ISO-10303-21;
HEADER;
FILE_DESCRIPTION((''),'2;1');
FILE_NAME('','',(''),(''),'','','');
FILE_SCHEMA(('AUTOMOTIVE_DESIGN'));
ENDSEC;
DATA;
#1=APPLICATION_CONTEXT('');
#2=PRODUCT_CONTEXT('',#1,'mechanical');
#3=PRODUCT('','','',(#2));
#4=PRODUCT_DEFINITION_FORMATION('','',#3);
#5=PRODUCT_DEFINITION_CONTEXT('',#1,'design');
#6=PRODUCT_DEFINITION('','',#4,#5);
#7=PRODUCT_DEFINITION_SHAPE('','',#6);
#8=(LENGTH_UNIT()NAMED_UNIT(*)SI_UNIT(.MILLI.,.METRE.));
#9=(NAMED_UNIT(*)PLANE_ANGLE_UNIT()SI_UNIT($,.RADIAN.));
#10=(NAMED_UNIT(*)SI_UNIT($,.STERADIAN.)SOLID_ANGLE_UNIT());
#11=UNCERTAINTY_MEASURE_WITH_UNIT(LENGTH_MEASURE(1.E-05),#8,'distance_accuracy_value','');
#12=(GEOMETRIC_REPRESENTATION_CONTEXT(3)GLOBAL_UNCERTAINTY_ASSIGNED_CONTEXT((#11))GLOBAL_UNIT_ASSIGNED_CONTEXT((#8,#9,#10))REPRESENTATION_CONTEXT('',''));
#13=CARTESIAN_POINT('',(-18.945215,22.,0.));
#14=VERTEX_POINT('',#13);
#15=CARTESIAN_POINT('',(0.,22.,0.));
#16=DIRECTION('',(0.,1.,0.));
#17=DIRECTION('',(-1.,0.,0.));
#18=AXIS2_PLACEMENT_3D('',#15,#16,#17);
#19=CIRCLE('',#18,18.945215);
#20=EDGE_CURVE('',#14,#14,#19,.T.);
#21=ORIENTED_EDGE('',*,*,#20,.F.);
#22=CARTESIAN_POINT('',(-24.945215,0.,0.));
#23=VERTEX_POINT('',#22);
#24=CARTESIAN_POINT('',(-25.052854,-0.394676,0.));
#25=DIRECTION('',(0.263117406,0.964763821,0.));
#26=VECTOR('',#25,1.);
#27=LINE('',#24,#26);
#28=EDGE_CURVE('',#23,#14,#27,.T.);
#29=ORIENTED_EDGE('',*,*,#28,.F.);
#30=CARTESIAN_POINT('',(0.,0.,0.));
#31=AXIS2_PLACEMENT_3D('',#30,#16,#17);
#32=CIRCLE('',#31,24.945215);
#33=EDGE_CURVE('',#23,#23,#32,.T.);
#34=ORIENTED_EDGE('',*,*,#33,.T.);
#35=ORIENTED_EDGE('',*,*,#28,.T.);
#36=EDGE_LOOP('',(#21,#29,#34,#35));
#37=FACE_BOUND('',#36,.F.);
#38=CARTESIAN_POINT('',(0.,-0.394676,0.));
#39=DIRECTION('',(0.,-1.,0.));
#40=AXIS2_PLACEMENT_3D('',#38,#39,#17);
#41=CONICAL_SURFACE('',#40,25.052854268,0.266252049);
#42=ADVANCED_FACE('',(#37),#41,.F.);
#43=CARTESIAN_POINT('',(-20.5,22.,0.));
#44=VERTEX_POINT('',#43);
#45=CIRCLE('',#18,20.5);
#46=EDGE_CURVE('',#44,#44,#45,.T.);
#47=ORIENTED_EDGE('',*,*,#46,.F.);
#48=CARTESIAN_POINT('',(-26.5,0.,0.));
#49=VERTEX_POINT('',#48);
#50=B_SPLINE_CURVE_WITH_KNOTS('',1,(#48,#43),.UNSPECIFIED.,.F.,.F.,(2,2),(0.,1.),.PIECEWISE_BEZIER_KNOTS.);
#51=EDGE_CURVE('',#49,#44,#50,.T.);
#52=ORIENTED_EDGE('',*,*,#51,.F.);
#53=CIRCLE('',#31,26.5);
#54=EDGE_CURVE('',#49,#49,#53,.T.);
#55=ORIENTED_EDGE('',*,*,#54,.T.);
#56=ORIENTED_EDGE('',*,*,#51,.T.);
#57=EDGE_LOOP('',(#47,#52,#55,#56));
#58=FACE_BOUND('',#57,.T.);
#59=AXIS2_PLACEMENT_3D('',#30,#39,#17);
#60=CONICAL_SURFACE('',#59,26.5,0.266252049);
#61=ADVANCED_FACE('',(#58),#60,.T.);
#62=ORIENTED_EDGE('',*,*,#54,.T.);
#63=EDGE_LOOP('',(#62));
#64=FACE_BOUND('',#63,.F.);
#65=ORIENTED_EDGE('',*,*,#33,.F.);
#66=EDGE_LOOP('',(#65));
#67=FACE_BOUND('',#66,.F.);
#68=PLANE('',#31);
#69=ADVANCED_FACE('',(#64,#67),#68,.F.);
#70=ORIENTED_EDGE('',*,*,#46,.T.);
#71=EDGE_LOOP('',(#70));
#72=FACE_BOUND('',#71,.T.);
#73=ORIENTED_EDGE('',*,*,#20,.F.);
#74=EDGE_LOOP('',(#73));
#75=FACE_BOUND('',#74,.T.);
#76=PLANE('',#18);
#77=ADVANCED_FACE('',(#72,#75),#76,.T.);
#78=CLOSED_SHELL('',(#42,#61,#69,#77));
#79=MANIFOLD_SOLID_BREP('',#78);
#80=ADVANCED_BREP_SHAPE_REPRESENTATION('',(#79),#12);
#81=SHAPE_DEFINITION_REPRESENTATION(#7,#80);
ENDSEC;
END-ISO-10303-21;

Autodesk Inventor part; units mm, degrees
ref_plane "YZ Plane" through (0, 0, 0) normal (1, 0, 0) x (0, 1, 0)
ref_plane "XY Plane" through (0, 0, 0) normal (0, 0, 1) x (1, 0, 0)
sketch "Szkic6" plane through (0, 0, 0) normal (0, 1, 0) x (-1, 0, 0)
  circle A0 centre (0, 0) radius 26.5
  dimension "d33" = 34
ref_plane "Płaszczyzna konstrukcyjna1" through (0, 22, 0) normal (0, 1, 0) x (-1, 0, 0)
sketch "Szkic7" plane through (0, 22, 0) normal (0, 1, 0) x (-1, 0, 0)
  circle A0 centre (0, 0) radius 20.5
  dimension "d35" = 22
loft "Wyciągnięcie złożone1" add profiles "Szkic6", "Szkic7"
shell "Skorupa1" thickness 1.5 removed faces 2 at (-3.5154, 22, 4.1371) at (-1.8199, 0, -2.5499)
equation "\"d33\" = OD1"
equation "\"d35\" = OD2"
equation "\"d52\" = THK"
equation "\"SzerokośćGięciaPodcięcia\" = Grubość"
equation "\"RozmiarPodcięciaNarożnika\" = 4 * Grubość"
equation "\"PromieńPrzejścia\" = PromieńGięcia"
equation "\"Rozmiar_promienia_Jacobiego\" = PromieńGięcia"
equation "\"Wielk_odstępu\" = Grubość"
equation "\"d2\" = PromieńGięcia"
equation "\"d23\" = PromieńGięcia"
equation "\"OD1\" = 34"
equation "\"OD2\" = 22"
equation "\"L\" = 22"
equation "\"THK\" = 1.5"
equation "\"d34\" = L"
equation "\"Grubość\" = 1.5"
equation "\"PromieńGięcia\" = 3"
properties part number "Redukcja symetryczna Ø34x22x1,5 L=22" material "304"
